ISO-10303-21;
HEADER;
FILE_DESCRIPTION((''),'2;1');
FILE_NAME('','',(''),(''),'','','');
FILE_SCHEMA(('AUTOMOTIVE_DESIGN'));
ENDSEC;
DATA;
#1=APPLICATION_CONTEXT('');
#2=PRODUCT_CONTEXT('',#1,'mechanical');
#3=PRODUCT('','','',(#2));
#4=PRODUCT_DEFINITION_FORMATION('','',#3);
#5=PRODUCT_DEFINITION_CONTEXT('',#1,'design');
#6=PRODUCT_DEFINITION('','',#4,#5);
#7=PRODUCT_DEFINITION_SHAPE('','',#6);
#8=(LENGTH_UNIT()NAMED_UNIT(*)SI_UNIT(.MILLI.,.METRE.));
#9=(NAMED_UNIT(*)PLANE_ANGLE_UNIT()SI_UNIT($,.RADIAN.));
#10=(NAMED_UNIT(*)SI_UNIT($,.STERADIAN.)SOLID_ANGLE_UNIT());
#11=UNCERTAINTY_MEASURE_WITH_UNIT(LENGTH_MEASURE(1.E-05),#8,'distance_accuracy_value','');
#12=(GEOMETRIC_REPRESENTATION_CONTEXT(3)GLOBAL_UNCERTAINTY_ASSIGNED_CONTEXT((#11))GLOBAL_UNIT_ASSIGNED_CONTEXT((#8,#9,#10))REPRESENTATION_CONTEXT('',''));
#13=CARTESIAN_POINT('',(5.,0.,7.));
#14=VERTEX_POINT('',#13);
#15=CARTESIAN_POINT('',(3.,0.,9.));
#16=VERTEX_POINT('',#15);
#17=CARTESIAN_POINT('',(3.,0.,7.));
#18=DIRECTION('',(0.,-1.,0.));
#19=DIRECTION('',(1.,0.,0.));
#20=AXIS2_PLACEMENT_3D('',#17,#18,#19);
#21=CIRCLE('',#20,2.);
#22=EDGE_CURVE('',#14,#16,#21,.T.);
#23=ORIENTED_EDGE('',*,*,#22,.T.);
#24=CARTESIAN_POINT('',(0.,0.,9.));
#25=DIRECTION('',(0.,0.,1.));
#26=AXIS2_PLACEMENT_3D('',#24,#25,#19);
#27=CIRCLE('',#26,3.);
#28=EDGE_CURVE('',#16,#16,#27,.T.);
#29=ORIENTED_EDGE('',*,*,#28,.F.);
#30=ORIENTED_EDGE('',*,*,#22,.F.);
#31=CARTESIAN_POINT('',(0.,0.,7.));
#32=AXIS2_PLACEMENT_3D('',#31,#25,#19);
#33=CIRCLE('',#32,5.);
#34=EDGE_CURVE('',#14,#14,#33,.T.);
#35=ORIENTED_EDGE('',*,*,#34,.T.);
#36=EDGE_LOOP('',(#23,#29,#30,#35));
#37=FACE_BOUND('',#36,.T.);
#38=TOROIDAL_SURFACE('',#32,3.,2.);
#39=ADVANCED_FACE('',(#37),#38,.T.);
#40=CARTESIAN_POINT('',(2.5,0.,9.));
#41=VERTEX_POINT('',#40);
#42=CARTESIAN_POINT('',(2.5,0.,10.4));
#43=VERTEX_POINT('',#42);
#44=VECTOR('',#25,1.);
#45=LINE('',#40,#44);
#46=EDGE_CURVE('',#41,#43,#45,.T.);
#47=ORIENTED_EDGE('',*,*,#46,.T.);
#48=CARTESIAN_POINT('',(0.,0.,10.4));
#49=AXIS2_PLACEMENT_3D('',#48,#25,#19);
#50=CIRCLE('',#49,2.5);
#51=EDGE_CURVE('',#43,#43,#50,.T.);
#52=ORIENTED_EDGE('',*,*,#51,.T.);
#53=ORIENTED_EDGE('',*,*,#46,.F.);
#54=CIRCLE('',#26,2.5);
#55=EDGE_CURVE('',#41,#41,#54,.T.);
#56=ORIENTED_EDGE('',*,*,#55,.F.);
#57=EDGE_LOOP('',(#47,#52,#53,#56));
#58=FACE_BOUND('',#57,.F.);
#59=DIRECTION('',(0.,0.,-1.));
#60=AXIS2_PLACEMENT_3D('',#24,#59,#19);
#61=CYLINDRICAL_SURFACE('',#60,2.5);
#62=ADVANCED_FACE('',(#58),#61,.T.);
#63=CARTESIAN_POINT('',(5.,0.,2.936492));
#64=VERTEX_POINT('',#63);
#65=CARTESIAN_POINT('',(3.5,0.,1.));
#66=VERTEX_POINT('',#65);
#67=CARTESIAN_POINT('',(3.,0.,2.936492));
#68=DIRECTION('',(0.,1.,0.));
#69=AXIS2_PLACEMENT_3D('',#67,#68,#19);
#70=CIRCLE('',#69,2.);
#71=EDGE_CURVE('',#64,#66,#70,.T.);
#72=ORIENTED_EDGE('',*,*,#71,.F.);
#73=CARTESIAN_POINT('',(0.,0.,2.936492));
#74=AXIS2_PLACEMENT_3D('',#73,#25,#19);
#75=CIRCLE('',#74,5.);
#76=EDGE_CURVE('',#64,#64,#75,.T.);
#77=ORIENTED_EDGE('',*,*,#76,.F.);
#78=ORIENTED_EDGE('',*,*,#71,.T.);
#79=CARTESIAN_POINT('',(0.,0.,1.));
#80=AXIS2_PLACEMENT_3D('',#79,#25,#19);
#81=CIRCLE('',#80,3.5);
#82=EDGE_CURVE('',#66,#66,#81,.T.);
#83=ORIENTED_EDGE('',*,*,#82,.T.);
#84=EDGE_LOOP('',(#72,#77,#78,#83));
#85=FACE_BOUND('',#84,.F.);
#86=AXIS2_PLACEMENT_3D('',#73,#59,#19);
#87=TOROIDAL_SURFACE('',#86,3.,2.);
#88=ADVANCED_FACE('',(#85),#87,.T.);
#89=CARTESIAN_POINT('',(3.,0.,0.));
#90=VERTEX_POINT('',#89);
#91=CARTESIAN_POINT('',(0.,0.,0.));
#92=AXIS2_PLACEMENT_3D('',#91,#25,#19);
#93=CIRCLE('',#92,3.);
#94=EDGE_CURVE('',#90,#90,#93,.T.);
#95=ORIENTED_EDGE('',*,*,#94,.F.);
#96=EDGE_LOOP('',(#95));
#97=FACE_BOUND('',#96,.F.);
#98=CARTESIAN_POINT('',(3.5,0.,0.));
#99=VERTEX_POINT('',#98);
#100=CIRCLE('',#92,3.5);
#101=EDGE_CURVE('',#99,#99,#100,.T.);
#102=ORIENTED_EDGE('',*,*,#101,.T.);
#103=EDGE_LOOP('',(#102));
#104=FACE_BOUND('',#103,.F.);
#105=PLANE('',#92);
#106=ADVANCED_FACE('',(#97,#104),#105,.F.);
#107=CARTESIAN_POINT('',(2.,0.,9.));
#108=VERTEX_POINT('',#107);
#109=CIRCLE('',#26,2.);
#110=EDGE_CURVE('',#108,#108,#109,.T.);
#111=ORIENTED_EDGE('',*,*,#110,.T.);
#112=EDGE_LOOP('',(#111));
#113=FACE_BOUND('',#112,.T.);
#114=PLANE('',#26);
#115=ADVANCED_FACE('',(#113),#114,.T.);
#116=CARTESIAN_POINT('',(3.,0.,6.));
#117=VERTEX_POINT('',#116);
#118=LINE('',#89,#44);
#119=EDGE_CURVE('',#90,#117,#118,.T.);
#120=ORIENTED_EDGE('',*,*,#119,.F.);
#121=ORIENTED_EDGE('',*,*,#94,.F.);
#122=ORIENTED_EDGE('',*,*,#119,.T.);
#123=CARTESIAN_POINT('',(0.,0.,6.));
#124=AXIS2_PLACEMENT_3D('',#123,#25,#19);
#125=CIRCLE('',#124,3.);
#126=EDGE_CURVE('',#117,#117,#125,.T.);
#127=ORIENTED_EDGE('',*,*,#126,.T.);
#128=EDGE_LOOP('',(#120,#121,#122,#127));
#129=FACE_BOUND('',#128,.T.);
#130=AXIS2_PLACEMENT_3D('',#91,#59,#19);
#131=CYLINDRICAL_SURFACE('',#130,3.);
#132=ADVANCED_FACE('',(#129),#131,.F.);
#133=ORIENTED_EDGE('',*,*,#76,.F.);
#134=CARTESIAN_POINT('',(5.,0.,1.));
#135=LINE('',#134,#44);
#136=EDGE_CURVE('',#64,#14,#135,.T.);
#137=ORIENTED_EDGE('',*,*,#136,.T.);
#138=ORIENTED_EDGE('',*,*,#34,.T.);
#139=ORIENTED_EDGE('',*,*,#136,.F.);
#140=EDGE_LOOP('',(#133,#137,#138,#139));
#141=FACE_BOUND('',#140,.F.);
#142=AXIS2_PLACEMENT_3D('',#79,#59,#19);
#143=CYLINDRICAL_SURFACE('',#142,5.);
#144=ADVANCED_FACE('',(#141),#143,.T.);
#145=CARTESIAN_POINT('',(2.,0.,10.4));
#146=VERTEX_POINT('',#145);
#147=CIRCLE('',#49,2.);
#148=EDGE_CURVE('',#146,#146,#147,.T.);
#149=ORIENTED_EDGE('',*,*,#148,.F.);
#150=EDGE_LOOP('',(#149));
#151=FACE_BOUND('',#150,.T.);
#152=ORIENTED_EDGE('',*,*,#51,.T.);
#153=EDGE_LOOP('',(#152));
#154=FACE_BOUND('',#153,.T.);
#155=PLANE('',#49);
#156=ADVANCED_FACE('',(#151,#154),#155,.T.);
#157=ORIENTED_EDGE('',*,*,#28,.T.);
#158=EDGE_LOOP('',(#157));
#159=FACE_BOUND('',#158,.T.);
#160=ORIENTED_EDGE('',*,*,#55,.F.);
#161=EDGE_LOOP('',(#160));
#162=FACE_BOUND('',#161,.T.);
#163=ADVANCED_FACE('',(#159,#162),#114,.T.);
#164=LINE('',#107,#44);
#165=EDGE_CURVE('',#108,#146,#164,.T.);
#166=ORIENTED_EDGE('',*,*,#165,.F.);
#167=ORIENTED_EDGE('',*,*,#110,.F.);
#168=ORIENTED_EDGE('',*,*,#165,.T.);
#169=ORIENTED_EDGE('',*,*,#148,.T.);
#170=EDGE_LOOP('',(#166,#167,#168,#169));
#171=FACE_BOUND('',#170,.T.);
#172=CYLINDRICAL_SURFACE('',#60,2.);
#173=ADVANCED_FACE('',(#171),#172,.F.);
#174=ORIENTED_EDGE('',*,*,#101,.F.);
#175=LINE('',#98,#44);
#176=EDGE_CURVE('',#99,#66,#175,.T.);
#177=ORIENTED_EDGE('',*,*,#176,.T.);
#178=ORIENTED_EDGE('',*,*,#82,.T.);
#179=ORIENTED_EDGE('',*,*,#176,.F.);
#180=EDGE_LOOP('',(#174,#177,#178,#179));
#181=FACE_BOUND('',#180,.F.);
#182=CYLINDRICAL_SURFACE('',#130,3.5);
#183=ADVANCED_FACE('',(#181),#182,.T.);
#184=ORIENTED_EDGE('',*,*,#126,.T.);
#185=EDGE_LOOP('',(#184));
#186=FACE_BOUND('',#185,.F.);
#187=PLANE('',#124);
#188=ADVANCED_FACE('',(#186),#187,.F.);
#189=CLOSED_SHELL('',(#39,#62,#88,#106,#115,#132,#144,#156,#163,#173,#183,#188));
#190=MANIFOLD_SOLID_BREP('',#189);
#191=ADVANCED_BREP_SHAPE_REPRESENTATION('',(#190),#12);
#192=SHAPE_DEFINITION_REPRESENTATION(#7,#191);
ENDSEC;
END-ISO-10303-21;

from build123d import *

# Parameters (mm, degrees)
F0_R     = 3.5
F0_R_2   = 3
F1_DEPTH = 1
F2_R     = 5
F2_R_2   = 3.5
F2_R_3   = 3
F3_DEPTH = 8
F4_R     = 2.5
F4_R_2   = 2
F5_DEPTH = 1.4
F7_DEPTH = 5


# Not quite as in the source:
# - a fillet or chamfer that OpenCascade refuses, or shapes differently, is made with other operations: its cross-section is extruded or revolved along the edge and cut away or added


with BuildPart() as f1:
    # F0 (on Top) → F1 (new body)
    with BuildSketch(Plane.XY):
        Circle(F0_R)
        Circle(F0_R_2, mode=Mode.SUBTRACT)
    extrude(amount=F1_DEPTH)

    # F2 (on face) → F3 (join)
    with BuildSketch(Plane.XY.offset(1)):
        Circle(F2_R)
        Circle(F2_R_2, mode=Mode.SUBTRACT)
        Circle(F2_R_2)
        Circle(F2_R_3, mode=Mode.SUBTRACT)
        Circle(F2_R_3)
    extrude(amount=F3_DEPTH)

    # F4 (on face) → F5 (join)
    with BuildSketch(Plane.XY.offset(9)):
        Circle(F4_R)
        Circle(F4_R_2, mode=Mode.SUBTRACT)
    extrude(amount=F5_DEPTH)

    # F6: fillet of radius 2 on 2 edges, made by hand

    # F6_s1 → F6_t2 (revolve, cut)
    with BuildSketch(Plane.XZ):
        with BuildLine():
            ThreePointArc((5, 7), (4.4142135624, 8.4142135624), (3, 9))
            Line((3, 9), (5, 9))
            Line((5, 9), (5, 7))
        make_face()
    revolve(axis=Axis((0, 0, 9), (0, 0, 1)), mode=Mode.SUBTRACT)

    # F6_s3 → F6_t4 (revolve, cut)
    with BuildSketch(Plane.XZ):
        with BuildLine():
            ThreePointArc((5, 2.9364916731), (4.5811388301, 1.7117468017), (3.5, 1))
            Line((3.5, 1), (5, 1))
            Line((5, 1), (5, 2.9364916731))
        make_face()
    revolve(axis=Axis((0, 0, 1), (0, 0, 1)), mode=Mode.SUBTRACT)

    # F7 (cut): a face of the model
    f7_faces = [f1.faces().sort_by_distance(p)[0] for p in [
        (0, 0, 1),
    ]]
    extrude(f7_faces, amount=-F7_DEPTH, mode=Mode.SUBTRACT)


solid = f1.part
